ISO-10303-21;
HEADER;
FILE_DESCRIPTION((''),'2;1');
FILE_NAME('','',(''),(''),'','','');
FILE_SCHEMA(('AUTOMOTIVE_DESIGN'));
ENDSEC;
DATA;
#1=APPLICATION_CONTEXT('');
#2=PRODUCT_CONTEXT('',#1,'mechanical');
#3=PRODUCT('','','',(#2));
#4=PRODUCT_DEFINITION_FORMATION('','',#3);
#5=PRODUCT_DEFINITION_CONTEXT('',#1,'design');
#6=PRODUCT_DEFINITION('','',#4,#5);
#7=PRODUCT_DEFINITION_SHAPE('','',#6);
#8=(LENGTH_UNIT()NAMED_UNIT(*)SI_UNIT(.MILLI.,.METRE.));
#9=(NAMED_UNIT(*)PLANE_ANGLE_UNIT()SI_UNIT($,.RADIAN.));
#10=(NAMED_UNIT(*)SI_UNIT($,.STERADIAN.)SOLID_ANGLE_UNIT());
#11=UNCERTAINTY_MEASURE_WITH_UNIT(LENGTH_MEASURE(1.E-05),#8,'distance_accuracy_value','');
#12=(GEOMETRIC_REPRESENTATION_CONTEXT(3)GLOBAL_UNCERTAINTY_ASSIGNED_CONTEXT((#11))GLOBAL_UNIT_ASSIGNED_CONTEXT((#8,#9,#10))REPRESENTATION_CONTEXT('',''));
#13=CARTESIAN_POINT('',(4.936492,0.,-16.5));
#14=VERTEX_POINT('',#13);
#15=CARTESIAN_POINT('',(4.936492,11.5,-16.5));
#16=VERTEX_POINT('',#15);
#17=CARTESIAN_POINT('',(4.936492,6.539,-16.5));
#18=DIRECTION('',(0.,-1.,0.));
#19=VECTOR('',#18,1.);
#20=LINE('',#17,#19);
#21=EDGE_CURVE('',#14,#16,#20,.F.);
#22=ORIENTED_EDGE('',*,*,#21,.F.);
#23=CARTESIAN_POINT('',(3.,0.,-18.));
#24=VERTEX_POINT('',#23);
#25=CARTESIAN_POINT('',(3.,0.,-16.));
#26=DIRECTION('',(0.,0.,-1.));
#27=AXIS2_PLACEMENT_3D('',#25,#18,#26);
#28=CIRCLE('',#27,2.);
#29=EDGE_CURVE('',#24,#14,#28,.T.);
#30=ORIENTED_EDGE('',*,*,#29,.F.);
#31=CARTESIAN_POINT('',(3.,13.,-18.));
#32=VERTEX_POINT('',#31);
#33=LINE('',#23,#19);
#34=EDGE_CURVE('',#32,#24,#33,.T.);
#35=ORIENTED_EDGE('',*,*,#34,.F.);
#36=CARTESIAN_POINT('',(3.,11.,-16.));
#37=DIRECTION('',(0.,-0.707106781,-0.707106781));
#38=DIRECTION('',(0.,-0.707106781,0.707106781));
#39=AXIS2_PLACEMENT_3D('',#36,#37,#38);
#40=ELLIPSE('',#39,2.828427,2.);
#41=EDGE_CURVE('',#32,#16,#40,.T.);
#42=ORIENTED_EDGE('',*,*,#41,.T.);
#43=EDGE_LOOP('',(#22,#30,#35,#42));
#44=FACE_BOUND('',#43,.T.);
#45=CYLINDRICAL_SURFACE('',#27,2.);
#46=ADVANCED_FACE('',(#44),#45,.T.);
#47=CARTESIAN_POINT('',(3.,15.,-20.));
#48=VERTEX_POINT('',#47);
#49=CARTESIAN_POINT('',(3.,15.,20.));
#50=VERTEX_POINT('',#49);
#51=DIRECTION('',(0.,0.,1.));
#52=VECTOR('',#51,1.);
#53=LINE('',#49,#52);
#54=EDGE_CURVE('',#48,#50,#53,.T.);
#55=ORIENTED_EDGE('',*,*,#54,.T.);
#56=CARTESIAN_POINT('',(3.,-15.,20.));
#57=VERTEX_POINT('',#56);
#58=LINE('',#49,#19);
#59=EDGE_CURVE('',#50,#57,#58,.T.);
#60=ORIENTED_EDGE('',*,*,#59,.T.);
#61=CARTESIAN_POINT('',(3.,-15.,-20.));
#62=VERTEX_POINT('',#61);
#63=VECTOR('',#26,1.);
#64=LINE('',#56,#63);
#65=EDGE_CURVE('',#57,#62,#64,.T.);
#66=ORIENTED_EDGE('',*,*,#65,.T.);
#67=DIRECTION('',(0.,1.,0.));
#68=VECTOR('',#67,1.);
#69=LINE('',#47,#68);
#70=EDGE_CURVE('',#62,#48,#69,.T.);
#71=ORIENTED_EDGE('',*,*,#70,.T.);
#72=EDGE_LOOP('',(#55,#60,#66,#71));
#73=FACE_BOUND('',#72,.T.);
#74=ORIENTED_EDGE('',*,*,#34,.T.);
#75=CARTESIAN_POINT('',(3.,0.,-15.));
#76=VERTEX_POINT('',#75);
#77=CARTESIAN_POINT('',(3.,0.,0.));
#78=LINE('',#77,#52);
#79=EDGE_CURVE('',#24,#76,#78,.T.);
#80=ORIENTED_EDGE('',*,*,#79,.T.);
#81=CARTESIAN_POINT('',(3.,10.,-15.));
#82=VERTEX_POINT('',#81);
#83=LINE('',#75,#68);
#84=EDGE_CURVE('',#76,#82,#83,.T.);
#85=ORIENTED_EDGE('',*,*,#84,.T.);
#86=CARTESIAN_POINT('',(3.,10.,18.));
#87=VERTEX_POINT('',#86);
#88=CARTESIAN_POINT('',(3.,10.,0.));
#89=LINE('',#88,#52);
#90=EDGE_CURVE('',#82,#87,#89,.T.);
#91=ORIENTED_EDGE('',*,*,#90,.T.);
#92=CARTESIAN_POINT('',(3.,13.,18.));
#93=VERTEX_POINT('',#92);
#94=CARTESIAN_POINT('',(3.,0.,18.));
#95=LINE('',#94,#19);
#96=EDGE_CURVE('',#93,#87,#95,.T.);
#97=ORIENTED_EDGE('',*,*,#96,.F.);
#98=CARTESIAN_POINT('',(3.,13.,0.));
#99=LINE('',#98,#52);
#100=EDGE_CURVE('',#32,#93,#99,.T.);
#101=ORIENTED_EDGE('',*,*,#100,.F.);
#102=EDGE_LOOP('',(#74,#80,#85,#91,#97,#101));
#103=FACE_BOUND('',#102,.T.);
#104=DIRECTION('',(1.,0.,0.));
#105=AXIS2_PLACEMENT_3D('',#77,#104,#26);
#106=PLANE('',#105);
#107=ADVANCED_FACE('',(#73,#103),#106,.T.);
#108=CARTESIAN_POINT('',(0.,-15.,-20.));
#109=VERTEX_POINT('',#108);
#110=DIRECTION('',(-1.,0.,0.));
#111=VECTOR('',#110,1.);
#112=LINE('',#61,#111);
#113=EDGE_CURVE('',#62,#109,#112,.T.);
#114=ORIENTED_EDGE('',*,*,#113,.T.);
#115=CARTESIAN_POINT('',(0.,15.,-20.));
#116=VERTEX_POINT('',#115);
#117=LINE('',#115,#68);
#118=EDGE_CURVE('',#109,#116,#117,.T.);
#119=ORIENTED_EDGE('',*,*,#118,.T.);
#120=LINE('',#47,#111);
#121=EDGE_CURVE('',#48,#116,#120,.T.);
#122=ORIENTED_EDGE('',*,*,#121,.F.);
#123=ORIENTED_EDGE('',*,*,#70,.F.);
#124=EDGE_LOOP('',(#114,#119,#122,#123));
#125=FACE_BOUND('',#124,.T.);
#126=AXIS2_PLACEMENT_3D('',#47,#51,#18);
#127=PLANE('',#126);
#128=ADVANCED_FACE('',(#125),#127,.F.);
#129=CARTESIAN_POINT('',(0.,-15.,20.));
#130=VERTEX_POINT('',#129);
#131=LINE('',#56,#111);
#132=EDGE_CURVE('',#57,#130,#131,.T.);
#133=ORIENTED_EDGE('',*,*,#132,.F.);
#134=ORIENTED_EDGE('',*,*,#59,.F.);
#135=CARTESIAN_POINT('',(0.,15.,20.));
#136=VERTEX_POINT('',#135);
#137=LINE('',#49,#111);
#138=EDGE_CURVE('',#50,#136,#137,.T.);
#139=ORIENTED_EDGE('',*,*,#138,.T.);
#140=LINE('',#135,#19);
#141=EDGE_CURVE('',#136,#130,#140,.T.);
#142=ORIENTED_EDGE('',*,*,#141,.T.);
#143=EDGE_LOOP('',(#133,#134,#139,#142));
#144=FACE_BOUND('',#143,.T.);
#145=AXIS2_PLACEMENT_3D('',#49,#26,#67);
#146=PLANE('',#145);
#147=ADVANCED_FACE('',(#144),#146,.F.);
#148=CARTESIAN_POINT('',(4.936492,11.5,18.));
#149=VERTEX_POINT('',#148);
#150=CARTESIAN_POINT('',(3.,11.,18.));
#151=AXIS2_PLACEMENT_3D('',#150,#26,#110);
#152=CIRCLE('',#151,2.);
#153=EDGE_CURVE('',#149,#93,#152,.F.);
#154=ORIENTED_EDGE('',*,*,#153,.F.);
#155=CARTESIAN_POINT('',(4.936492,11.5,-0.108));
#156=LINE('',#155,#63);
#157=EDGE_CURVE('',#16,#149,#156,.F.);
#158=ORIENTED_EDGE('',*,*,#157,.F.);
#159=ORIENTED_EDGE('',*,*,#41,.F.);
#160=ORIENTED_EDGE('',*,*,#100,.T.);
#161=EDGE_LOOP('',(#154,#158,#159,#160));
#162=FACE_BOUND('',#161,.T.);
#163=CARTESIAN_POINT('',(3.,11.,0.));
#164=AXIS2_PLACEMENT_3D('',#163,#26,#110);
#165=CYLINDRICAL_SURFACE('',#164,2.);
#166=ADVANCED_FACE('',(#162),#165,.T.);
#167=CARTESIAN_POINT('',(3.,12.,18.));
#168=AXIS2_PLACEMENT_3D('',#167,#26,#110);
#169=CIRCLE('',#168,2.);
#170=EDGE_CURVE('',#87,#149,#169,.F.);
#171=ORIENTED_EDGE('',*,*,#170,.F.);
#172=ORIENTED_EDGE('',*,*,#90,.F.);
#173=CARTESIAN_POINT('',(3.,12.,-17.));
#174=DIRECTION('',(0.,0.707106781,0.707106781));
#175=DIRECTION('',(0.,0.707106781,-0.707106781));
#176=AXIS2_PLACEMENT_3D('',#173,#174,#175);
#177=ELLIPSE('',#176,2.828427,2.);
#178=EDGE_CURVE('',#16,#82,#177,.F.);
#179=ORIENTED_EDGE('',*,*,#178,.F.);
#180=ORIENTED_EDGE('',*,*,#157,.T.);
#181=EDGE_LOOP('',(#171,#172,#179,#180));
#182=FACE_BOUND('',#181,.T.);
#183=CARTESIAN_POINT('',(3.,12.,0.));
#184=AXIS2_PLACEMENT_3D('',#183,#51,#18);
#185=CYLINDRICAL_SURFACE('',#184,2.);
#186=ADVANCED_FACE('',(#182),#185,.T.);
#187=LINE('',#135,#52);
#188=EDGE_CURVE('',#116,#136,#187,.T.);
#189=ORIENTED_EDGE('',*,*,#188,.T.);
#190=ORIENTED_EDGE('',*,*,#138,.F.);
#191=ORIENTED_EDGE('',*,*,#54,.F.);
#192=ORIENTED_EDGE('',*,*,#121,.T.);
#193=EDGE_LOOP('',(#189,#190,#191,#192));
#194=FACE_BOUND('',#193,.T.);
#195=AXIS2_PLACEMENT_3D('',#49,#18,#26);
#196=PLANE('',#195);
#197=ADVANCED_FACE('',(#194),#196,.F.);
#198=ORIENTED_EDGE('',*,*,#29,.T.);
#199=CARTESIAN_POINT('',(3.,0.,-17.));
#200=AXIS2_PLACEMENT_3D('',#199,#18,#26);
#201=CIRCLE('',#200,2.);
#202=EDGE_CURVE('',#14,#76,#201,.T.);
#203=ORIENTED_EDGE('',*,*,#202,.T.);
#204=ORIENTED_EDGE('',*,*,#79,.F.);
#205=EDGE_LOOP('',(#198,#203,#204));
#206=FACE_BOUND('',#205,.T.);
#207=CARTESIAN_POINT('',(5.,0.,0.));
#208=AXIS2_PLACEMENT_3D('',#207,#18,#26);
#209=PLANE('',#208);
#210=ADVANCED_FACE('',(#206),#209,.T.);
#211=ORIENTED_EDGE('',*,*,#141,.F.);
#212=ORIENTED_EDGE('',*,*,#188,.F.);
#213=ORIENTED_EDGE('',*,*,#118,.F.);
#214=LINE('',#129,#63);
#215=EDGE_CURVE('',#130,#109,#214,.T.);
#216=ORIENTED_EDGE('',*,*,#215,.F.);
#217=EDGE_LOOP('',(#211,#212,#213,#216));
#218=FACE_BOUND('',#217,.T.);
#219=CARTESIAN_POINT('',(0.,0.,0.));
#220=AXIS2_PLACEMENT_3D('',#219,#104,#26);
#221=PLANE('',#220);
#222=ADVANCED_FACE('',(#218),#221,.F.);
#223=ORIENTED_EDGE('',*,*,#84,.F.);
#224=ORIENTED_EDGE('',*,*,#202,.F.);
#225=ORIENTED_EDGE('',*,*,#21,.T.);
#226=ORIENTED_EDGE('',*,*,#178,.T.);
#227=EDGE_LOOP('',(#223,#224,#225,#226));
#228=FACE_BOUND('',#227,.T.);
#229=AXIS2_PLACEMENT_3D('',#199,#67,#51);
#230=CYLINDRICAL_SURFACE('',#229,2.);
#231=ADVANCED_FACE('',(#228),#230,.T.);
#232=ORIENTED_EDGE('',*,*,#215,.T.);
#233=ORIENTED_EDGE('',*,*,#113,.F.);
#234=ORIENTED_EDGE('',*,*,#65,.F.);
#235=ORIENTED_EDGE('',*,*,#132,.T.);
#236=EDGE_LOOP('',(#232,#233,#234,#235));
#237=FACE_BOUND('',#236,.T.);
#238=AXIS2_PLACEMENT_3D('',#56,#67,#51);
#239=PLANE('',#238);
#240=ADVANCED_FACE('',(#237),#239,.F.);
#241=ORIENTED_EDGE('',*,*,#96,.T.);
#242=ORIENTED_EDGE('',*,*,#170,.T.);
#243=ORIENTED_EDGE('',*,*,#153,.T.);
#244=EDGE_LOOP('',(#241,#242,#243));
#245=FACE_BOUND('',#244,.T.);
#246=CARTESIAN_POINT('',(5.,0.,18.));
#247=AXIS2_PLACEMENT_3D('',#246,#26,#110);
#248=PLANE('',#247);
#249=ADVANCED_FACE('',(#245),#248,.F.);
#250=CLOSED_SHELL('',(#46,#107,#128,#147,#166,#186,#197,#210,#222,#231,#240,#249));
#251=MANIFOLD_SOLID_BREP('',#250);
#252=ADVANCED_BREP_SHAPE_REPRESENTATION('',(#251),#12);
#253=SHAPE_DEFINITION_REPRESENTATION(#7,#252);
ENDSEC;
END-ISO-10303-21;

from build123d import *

# Parameters (mm, degrees)
SKETCH1_W           = 40
SKETCH1_H           = 30
BOSS_EXTRUDE1_DEPTH = 3
BOSS_EXTRUDE2_DEPTH = 2
FILLET1_R           = 2


with BuildPart() as part:
    # Sketch1 → Boss-Extrude1 (new body)
    with BuildSketch(Plane(origin=(0, 0, 0), x_dir=(0, 0, -1), z_dir=(1, 0, 0))):
        Rectangle(SKETCH1_W, SKETCH1_H)
    extrude(amount=BOSS_EXTRUDE1_DEPTH)

    # Sketch2 → Boss-Extrude2 (add)
    with BuildSketch(Plane(origin=(3, 0, 0), x_dir=(0, 0, -1), z_dir=(1, 0, 0))):
        Polygon((18, 0), (18, 13), (-13.768503326, 13), (-18, 13), (-18, 10), (-15, 10), (15, 10), (15, 0), align=None)
    extrude(amount=BOSS_EXTRUDE2_DEPTH)

    # Fillet1
    # the kernel refuses this fillet: 2 mm, written as the material it takes off along each edge
    with BuildSketch(Plane(origin=(5, 10, -15), x_dir=(-1, 0, 0), z_dir=(0, 0, 1))) as fillet1_piece_1:
        with BuildLine():
            CenterArc((FILLET1_R, -FILLET1_R), FILLET1_R, 90, 90)
            Line((0, -FILLET1_R), (0, 0))
            Line((0, 0), (FILLET1_R, 0))
        make_face()
    extrude(amount=38, mode=Mode.SUBTRACT)
    with BuildSketch(Plane(origin=(5, 13, 23), x_dir=(-1, 0, 0), z_dir=(0, 0, -1))) as fillet1_piece_2:
        with BuildLine():
            CenterArc((FILLET1_R, -FILLET1_R), FILLET1_R, 90, 90)
            Line((0, -FILLET1_R), (0, 0))
            Line((0, 0), (FILLET1_R, 0))
        make_face()
    extrude(amount=46, mode=Mode.SUBTRACT)
    with BuildSketch(Plane(origin=(5, 10, -15), x_dir=(-1, 0, 0), z_dir=(0, -1, 0))) as fillet1_piece_3:
        with BuildLine():
            CenterArc((FILLET1_R, FILLET1_R), FILLET1_R, 180, 90)
            Line((0, FILLET1_R), (0, 0))
            Line((0, 0), (FILLET1_R, 0))
        make_face()
    extrude(amount=15, mode=Mode.SUBTRACT)
    with BuildSketch(Plane(origin=(5, -5, -18), x_dir=(-1, 0, 0), z_dir=(0, 1, 0))) as fillet1_piece_4:
        with BuildLine():
            CenterArc((FILLET1_R, FILLET1_R), FILLET1_R, 180, 90)
            Line((0, FILLET1_R), (0, 0))
            Line((0, 0), (FILLET1_R, 0))
        make_face()
    extrude(amount=23, mode=Mode.SUBTRACT)
    with BuildSketch(Plane(origin=(5, 15, -15), x_dir=(-1, 0, 0), z_dir=(0, -1, 0))) as fillet1_piece_5a_section:
        with BuildLine():
            CenterArc((FILLET1_R, FILLET1_R), FILLET1_R, 180, 90)
            Line((0, FILLET1_R), (0, 0))
            Line((0, 0), (FILLET1_R, 0))
        make_face()
    fillet1_piece_5a = extrude(amount=20, mode=Mode.PRIVATE)
    fillet1_piece_5a = split(fillet1_piece_5a, bisect_by=Plane(origin=(4.547209771, 10, -15.452790229), z_dir=(0, 1, 0)), keep=Keep.TOP, mode=Mode.PRIVATE)
    with BuildSketch(Plane(origin=(5, 10, -20), x_dir=(-1, 0, 0), z_dir=(0, 0, 1))) as fillet1_piece_5b_section:
        with BuildLine():
            CenterArc((FILLET1_R, -FILLET1_R), FILLET1_R, 90, 90)
            Line((0, -FILLET1_R), (0, 0))
            Line((0, 0), (FILLET1_R, 0))
        make_face()
    fillet1_piece_5b = extrude(amount=43, mode=Mode.PRIVATE)
    fillet1_piece_5b = split(fillet1_piece_5b, bisect_by=Plane(origin=(4.547209771, 10.452790229, -15), z_dir=(0, 0, -1)), keep=Keep.TOP, mode=Mode.PRIVATE)
    fillet1_piece_5 = fillet1_piece_5a & fillet1_piece_5b
    add(fillet1_piece_5, mode=Mode.SUBTRACT)


solid = part.part
